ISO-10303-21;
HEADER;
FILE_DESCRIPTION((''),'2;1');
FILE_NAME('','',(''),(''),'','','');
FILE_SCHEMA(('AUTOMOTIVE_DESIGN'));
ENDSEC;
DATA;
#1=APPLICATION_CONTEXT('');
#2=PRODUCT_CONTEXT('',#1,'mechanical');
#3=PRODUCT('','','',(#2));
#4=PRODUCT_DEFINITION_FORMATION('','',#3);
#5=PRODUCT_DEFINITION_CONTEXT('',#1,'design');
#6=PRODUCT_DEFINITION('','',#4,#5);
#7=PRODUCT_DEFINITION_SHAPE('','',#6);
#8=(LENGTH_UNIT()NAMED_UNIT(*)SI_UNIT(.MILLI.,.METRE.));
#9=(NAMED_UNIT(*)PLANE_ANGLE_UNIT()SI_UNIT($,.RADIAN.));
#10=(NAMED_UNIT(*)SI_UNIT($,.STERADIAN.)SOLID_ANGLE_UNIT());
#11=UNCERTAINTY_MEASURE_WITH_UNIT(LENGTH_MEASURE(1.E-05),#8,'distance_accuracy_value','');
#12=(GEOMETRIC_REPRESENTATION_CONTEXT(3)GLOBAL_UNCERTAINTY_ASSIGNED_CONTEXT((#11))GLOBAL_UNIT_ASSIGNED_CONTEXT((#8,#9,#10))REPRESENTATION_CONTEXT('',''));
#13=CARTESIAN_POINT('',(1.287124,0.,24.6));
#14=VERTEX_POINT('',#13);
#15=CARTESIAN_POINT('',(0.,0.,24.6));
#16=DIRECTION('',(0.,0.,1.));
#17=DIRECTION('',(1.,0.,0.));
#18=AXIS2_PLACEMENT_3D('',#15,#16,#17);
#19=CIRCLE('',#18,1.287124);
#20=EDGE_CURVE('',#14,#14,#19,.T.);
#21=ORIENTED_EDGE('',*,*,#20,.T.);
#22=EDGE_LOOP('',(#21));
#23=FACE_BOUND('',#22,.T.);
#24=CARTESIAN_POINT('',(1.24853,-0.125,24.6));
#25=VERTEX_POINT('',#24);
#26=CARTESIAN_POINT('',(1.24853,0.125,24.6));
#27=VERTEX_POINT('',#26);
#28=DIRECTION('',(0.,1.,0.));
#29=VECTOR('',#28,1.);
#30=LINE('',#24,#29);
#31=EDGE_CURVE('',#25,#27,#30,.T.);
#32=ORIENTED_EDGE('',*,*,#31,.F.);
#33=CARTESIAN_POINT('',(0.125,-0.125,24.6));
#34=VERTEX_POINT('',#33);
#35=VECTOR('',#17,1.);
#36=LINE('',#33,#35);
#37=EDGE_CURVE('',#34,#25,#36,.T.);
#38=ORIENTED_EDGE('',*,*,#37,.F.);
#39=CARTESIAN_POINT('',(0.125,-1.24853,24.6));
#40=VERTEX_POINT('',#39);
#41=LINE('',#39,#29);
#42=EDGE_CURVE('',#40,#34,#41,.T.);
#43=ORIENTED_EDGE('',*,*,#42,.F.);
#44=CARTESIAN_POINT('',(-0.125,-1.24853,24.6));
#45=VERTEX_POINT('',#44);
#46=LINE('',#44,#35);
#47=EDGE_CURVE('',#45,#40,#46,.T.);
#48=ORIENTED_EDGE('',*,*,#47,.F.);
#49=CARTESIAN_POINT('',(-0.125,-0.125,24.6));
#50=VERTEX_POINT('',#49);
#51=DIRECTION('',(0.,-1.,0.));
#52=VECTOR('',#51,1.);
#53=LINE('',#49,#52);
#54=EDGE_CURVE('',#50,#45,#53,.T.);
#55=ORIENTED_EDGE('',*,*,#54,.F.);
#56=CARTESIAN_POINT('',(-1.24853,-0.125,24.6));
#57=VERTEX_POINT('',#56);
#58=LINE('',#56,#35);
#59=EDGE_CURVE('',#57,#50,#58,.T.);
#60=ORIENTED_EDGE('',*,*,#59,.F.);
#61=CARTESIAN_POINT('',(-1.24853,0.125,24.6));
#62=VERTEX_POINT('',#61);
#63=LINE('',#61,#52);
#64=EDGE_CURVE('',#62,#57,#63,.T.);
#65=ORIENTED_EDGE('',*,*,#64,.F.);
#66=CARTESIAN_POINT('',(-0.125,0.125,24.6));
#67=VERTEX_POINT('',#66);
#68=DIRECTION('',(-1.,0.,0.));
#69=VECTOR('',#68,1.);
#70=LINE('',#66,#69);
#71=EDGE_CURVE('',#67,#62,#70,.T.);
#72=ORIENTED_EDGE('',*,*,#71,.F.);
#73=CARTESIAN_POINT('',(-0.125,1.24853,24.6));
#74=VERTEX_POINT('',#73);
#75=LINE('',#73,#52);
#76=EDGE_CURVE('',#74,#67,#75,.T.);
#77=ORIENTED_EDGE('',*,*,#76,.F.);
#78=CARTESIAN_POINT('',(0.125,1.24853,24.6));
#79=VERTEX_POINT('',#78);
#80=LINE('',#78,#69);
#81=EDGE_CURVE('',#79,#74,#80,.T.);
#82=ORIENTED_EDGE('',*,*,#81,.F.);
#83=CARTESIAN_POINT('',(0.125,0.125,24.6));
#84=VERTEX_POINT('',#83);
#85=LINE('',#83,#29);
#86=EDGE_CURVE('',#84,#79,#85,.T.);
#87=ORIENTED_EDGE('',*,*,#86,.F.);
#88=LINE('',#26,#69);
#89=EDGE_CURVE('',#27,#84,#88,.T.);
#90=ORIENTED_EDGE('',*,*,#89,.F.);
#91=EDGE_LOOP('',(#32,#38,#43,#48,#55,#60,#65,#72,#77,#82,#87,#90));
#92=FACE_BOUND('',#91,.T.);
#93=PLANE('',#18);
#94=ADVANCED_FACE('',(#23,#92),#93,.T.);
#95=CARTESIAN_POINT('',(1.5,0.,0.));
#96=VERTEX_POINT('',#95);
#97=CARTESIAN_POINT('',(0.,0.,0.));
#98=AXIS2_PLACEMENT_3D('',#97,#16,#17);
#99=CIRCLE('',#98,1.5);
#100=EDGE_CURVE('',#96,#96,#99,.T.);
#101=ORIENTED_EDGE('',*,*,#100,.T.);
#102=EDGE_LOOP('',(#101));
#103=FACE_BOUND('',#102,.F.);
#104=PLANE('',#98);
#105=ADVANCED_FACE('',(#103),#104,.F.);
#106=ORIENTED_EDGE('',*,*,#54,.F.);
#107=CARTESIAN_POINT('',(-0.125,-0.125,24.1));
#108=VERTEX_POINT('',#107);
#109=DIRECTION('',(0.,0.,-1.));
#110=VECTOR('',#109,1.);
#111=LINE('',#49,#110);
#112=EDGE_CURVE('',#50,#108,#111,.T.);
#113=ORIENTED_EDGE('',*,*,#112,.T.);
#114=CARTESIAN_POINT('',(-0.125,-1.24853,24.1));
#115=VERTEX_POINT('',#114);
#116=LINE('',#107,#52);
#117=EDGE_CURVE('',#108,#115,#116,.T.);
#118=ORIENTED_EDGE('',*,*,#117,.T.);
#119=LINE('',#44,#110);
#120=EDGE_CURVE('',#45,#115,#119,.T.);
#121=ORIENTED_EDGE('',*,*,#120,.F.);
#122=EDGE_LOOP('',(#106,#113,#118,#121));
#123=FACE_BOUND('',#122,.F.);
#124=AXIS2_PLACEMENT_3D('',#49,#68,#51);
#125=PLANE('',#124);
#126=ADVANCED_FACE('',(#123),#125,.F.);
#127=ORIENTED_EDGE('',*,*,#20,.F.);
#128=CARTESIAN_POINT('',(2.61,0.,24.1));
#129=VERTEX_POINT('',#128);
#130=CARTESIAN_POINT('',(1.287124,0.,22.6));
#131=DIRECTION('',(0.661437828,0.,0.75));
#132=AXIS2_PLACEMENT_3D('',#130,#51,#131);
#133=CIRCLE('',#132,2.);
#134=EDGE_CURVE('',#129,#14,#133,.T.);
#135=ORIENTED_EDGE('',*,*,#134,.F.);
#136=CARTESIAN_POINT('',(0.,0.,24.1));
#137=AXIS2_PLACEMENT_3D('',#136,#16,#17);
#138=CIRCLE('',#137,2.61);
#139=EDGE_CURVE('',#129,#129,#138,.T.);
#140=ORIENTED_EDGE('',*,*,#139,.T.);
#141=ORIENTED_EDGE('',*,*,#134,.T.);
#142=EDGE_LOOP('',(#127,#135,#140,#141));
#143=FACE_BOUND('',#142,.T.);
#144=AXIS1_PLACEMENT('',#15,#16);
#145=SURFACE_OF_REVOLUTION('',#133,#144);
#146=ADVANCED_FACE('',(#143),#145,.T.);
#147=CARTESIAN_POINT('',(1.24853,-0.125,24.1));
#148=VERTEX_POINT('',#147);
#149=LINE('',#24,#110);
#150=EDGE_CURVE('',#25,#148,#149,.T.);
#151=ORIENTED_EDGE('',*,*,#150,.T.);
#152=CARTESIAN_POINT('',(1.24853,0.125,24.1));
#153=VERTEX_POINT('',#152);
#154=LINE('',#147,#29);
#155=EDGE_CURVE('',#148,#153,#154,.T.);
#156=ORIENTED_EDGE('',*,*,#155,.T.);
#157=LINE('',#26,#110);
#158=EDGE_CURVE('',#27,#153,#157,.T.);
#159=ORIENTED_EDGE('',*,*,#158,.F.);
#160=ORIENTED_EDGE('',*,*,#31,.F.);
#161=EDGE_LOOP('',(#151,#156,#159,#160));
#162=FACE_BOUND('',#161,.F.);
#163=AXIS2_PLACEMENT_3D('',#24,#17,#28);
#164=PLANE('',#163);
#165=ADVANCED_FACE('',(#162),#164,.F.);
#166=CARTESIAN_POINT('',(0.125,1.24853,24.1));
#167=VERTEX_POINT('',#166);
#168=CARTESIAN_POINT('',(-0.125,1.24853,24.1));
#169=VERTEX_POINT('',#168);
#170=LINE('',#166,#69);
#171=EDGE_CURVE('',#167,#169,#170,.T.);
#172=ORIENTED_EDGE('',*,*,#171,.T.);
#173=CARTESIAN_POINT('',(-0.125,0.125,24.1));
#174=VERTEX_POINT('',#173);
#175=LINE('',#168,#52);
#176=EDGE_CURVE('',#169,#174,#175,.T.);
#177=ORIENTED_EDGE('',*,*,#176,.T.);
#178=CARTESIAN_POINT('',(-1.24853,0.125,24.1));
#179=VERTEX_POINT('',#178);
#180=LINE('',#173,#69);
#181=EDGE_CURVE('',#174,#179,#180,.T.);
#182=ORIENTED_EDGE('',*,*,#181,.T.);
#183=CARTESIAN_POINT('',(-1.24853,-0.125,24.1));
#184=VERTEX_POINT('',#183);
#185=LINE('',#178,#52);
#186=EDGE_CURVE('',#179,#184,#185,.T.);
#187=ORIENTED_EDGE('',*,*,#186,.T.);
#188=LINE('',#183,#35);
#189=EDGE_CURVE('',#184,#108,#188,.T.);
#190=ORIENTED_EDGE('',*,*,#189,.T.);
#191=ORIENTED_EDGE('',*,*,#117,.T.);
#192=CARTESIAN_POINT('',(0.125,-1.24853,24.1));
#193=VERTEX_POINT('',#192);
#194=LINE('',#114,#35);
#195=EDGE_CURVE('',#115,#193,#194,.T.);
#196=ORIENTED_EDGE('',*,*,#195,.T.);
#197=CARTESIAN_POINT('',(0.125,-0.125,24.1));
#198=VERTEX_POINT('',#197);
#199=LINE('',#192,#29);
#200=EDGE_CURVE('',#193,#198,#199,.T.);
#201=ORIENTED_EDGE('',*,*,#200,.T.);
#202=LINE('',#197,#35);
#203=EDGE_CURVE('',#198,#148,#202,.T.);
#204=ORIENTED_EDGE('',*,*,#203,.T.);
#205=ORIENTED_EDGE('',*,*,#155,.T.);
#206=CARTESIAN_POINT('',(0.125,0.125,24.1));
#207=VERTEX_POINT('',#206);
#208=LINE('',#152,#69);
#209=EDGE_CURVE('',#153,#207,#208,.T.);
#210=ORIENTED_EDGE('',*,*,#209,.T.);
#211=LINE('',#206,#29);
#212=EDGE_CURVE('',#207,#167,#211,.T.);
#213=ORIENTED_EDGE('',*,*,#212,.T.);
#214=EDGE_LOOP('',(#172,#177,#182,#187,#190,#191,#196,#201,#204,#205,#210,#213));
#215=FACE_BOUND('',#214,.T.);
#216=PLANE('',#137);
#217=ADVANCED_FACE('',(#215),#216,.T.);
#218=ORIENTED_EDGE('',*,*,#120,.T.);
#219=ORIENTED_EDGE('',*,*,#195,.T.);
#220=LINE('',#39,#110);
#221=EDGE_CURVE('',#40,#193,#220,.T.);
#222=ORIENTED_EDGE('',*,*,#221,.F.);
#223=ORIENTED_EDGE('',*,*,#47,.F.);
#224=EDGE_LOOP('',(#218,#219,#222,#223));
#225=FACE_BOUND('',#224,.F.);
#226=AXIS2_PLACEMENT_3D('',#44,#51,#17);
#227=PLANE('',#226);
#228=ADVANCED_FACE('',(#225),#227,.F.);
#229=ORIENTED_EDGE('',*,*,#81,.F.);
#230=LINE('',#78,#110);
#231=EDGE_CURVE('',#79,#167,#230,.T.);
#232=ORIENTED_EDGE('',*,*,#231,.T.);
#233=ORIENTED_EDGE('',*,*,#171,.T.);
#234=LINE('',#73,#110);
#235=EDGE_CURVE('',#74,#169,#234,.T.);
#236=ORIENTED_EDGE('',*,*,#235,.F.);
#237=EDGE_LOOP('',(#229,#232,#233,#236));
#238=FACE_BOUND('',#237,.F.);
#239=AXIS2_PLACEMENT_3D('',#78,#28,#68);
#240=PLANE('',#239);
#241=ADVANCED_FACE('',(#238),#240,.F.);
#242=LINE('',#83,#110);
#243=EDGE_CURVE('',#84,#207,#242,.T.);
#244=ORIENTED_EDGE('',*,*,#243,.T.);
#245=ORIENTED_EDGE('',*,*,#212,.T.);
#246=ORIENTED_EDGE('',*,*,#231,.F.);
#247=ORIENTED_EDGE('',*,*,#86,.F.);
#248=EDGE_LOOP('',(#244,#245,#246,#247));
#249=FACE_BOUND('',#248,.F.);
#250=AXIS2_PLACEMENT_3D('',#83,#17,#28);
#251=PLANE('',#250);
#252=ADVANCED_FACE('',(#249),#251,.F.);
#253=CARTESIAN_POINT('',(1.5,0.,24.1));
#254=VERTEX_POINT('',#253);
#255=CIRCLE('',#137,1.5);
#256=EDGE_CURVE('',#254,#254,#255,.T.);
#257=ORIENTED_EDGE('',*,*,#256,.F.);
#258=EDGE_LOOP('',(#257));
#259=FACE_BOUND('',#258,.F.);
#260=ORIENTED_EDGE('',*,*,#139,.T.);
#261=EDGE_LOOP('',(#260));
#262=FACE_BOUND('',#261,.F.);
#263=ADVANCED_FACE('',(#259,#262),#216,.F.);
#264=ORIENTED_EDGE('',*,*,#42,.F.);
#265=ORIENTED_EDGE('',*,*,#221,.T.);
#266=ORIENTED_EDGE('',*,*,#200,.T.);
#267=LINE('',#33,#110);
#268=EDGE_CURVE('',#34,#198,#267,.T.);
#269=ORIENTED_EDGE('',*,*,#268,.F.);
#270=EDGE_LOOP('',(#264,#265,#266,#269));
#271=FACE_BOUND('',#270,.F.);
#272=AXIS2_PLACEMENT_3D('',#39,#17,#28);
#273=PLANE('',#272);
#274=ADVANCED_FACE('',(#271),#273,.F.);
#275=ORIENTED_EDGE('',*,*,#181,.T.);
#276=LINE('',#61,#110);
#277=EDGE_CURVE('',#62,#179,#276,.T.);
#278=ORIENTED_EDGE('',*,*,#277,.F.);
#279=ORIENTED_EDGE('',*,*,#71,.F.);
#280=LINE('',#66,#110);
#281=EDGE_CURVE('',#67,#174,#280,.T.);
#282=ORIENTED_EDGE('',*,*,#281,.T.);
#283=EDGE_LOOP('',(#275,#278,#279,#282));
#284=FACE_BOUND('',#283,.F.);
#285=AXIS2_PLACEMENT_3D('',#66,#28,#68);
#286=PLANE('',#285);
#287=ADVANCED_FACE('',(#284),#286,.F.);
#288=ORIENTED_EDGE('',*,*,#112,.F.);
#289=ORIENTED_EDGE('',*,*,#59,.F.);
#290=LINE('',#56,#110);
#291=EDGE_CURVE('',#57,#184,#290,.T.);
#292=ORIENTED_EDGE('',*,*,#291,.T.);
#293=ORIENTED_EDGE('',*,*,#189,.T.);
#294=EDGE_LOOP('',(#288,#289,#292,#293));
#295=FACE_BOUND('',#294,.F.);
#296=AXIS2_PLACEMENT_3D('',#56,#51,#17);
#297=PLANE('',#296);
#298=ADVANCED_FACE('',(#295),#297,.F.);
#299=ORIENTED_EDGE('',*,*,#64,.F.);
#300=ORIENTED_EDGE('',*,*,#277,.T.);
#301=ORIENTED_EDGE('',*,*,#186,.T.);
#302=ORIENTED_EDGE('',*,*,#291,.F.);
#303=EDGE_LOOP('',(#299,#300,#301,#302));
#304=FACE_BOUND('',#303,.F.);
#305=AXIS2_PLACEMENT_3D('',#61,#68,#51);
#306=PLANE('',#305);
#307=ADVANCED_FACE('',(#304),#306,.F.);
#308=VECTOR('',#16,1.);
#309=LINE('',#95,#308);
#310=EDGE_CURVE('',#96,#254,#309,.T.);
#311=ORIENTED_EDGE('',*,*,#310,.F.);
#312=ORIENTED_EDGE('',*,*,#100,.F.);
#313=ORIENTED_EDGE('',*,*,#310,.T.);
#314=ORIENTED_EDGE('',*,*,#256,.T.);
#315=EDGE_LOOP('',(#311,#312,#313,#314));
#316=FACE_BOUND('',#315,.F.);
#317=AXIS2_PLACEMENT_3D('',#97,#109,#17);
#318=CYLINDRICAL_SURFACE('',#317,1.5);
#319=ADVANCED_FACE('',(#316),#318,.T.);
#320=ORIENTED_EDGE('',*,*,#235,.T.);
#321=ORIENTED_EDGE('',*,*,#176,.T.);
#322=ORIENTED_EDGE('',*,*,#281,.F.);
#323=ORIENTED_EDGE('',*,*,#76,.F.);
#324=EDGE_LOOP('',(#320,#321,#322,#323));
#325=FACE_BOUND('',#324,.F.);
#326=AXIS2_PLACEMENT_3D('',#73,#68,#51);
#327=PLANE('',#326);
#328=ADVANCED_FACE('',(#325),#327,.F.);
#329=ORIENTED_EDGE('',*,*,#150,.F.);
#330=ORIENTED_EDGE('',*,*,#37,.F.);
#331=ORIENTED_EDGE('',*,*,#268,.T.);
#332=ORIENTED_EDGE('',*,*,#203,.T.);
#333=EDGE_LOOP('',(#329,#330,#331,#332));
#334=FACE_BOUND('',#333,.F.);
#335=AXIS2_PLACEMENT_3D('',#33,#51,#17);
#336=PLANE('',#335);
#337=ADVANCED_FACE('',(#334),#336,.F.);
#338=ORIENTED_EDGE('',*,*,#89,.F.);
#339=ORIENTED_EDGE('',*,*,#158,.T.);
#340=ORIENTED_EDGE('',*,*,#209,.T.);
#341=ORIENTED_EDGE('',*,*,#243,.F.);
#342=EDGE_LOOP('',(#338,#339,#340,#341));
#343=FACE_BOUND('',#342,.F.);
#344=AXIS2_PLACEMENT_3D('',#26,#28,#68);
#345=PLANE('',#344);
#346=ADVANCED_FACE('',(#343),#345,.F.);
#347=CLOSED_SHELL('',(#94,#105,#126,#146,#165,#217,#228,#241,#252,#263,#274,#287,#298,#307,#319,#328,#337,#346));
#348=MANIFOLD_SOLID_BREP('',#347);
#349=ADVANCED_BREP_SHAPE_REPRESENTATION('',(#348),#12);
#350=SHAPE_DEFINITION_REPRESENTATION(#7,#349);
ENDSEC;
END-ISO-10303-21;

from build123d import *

# Parameters (mm, degrees)
F0_R     = 1.5
F1_DEPTH = 24.6
F2_R     = 2.61
F2_R_2   = 1.5
F3_DEPTH = 0.5
F5_DEPTH = 0.5


# Not quite as in the source:
# - a fillet or chamfer that OpenCascade refuses, or shapes differently, is made with other operations: its cross-section is extruded or revolved along the edge and cut away or added


with BuildPart() as f1:
    # F0 (on Top) → F1 (new body)
    with BuildSketch(Plane.XY):
        Circle(F0_R)
    extrude(amount=F1_DEPTH)

    # F2 (on face) → F3 (join)
    with BuildSketch(Plane.XY.offset(24.6)):
        Circle(F2_R)
        Circle(F2_R_2, mode=Mode.SUBTRACT)
    extrude(amount=-F3_DEPTH)

    # F4: fillet of radius 2 on 1 edges, made by hand

    # F4_s1 → F4_t2 (revolve, cut)
    with BuildSketch(Plane.XZ):
        with BuildLine():
            ThreePointArc((2.61, 24.1), (1.9942311257, 24.4708286934), (1.2871243445, 24.6))
            Line((1.2871243445, 24.6), (2.61, 24.6))
            Line((2.61, 24.6), (2.61, 24.1))
        make_face()
    revolve(axis=Axis((0, 0, 24.6), (0, 0, 1)), mode=Mode.SUBTRACT)

    # F2 (on face) → F5 (cut)
    with BuildSketch(Plane.XY.offset(24.6)):
        Polygon((-1.2485300168, 0.125), (-1.2485300168, -0.125), (-0.125, -0.125), (-0.125, -1.2485300168), (0.125, -1.2485300168), (0.125, -0.125), (1.2485300168, -0.125), (1.2485300168, 0.125), (0.125, 0.125), (0.125, 1.2485300168), (-0.125, 1.2485300168), (-0.125, 0.125), align=None)
    extrude(amount=-F5_DEPTH, mode=Mode.SUBTRACT)


solid = f1.part
